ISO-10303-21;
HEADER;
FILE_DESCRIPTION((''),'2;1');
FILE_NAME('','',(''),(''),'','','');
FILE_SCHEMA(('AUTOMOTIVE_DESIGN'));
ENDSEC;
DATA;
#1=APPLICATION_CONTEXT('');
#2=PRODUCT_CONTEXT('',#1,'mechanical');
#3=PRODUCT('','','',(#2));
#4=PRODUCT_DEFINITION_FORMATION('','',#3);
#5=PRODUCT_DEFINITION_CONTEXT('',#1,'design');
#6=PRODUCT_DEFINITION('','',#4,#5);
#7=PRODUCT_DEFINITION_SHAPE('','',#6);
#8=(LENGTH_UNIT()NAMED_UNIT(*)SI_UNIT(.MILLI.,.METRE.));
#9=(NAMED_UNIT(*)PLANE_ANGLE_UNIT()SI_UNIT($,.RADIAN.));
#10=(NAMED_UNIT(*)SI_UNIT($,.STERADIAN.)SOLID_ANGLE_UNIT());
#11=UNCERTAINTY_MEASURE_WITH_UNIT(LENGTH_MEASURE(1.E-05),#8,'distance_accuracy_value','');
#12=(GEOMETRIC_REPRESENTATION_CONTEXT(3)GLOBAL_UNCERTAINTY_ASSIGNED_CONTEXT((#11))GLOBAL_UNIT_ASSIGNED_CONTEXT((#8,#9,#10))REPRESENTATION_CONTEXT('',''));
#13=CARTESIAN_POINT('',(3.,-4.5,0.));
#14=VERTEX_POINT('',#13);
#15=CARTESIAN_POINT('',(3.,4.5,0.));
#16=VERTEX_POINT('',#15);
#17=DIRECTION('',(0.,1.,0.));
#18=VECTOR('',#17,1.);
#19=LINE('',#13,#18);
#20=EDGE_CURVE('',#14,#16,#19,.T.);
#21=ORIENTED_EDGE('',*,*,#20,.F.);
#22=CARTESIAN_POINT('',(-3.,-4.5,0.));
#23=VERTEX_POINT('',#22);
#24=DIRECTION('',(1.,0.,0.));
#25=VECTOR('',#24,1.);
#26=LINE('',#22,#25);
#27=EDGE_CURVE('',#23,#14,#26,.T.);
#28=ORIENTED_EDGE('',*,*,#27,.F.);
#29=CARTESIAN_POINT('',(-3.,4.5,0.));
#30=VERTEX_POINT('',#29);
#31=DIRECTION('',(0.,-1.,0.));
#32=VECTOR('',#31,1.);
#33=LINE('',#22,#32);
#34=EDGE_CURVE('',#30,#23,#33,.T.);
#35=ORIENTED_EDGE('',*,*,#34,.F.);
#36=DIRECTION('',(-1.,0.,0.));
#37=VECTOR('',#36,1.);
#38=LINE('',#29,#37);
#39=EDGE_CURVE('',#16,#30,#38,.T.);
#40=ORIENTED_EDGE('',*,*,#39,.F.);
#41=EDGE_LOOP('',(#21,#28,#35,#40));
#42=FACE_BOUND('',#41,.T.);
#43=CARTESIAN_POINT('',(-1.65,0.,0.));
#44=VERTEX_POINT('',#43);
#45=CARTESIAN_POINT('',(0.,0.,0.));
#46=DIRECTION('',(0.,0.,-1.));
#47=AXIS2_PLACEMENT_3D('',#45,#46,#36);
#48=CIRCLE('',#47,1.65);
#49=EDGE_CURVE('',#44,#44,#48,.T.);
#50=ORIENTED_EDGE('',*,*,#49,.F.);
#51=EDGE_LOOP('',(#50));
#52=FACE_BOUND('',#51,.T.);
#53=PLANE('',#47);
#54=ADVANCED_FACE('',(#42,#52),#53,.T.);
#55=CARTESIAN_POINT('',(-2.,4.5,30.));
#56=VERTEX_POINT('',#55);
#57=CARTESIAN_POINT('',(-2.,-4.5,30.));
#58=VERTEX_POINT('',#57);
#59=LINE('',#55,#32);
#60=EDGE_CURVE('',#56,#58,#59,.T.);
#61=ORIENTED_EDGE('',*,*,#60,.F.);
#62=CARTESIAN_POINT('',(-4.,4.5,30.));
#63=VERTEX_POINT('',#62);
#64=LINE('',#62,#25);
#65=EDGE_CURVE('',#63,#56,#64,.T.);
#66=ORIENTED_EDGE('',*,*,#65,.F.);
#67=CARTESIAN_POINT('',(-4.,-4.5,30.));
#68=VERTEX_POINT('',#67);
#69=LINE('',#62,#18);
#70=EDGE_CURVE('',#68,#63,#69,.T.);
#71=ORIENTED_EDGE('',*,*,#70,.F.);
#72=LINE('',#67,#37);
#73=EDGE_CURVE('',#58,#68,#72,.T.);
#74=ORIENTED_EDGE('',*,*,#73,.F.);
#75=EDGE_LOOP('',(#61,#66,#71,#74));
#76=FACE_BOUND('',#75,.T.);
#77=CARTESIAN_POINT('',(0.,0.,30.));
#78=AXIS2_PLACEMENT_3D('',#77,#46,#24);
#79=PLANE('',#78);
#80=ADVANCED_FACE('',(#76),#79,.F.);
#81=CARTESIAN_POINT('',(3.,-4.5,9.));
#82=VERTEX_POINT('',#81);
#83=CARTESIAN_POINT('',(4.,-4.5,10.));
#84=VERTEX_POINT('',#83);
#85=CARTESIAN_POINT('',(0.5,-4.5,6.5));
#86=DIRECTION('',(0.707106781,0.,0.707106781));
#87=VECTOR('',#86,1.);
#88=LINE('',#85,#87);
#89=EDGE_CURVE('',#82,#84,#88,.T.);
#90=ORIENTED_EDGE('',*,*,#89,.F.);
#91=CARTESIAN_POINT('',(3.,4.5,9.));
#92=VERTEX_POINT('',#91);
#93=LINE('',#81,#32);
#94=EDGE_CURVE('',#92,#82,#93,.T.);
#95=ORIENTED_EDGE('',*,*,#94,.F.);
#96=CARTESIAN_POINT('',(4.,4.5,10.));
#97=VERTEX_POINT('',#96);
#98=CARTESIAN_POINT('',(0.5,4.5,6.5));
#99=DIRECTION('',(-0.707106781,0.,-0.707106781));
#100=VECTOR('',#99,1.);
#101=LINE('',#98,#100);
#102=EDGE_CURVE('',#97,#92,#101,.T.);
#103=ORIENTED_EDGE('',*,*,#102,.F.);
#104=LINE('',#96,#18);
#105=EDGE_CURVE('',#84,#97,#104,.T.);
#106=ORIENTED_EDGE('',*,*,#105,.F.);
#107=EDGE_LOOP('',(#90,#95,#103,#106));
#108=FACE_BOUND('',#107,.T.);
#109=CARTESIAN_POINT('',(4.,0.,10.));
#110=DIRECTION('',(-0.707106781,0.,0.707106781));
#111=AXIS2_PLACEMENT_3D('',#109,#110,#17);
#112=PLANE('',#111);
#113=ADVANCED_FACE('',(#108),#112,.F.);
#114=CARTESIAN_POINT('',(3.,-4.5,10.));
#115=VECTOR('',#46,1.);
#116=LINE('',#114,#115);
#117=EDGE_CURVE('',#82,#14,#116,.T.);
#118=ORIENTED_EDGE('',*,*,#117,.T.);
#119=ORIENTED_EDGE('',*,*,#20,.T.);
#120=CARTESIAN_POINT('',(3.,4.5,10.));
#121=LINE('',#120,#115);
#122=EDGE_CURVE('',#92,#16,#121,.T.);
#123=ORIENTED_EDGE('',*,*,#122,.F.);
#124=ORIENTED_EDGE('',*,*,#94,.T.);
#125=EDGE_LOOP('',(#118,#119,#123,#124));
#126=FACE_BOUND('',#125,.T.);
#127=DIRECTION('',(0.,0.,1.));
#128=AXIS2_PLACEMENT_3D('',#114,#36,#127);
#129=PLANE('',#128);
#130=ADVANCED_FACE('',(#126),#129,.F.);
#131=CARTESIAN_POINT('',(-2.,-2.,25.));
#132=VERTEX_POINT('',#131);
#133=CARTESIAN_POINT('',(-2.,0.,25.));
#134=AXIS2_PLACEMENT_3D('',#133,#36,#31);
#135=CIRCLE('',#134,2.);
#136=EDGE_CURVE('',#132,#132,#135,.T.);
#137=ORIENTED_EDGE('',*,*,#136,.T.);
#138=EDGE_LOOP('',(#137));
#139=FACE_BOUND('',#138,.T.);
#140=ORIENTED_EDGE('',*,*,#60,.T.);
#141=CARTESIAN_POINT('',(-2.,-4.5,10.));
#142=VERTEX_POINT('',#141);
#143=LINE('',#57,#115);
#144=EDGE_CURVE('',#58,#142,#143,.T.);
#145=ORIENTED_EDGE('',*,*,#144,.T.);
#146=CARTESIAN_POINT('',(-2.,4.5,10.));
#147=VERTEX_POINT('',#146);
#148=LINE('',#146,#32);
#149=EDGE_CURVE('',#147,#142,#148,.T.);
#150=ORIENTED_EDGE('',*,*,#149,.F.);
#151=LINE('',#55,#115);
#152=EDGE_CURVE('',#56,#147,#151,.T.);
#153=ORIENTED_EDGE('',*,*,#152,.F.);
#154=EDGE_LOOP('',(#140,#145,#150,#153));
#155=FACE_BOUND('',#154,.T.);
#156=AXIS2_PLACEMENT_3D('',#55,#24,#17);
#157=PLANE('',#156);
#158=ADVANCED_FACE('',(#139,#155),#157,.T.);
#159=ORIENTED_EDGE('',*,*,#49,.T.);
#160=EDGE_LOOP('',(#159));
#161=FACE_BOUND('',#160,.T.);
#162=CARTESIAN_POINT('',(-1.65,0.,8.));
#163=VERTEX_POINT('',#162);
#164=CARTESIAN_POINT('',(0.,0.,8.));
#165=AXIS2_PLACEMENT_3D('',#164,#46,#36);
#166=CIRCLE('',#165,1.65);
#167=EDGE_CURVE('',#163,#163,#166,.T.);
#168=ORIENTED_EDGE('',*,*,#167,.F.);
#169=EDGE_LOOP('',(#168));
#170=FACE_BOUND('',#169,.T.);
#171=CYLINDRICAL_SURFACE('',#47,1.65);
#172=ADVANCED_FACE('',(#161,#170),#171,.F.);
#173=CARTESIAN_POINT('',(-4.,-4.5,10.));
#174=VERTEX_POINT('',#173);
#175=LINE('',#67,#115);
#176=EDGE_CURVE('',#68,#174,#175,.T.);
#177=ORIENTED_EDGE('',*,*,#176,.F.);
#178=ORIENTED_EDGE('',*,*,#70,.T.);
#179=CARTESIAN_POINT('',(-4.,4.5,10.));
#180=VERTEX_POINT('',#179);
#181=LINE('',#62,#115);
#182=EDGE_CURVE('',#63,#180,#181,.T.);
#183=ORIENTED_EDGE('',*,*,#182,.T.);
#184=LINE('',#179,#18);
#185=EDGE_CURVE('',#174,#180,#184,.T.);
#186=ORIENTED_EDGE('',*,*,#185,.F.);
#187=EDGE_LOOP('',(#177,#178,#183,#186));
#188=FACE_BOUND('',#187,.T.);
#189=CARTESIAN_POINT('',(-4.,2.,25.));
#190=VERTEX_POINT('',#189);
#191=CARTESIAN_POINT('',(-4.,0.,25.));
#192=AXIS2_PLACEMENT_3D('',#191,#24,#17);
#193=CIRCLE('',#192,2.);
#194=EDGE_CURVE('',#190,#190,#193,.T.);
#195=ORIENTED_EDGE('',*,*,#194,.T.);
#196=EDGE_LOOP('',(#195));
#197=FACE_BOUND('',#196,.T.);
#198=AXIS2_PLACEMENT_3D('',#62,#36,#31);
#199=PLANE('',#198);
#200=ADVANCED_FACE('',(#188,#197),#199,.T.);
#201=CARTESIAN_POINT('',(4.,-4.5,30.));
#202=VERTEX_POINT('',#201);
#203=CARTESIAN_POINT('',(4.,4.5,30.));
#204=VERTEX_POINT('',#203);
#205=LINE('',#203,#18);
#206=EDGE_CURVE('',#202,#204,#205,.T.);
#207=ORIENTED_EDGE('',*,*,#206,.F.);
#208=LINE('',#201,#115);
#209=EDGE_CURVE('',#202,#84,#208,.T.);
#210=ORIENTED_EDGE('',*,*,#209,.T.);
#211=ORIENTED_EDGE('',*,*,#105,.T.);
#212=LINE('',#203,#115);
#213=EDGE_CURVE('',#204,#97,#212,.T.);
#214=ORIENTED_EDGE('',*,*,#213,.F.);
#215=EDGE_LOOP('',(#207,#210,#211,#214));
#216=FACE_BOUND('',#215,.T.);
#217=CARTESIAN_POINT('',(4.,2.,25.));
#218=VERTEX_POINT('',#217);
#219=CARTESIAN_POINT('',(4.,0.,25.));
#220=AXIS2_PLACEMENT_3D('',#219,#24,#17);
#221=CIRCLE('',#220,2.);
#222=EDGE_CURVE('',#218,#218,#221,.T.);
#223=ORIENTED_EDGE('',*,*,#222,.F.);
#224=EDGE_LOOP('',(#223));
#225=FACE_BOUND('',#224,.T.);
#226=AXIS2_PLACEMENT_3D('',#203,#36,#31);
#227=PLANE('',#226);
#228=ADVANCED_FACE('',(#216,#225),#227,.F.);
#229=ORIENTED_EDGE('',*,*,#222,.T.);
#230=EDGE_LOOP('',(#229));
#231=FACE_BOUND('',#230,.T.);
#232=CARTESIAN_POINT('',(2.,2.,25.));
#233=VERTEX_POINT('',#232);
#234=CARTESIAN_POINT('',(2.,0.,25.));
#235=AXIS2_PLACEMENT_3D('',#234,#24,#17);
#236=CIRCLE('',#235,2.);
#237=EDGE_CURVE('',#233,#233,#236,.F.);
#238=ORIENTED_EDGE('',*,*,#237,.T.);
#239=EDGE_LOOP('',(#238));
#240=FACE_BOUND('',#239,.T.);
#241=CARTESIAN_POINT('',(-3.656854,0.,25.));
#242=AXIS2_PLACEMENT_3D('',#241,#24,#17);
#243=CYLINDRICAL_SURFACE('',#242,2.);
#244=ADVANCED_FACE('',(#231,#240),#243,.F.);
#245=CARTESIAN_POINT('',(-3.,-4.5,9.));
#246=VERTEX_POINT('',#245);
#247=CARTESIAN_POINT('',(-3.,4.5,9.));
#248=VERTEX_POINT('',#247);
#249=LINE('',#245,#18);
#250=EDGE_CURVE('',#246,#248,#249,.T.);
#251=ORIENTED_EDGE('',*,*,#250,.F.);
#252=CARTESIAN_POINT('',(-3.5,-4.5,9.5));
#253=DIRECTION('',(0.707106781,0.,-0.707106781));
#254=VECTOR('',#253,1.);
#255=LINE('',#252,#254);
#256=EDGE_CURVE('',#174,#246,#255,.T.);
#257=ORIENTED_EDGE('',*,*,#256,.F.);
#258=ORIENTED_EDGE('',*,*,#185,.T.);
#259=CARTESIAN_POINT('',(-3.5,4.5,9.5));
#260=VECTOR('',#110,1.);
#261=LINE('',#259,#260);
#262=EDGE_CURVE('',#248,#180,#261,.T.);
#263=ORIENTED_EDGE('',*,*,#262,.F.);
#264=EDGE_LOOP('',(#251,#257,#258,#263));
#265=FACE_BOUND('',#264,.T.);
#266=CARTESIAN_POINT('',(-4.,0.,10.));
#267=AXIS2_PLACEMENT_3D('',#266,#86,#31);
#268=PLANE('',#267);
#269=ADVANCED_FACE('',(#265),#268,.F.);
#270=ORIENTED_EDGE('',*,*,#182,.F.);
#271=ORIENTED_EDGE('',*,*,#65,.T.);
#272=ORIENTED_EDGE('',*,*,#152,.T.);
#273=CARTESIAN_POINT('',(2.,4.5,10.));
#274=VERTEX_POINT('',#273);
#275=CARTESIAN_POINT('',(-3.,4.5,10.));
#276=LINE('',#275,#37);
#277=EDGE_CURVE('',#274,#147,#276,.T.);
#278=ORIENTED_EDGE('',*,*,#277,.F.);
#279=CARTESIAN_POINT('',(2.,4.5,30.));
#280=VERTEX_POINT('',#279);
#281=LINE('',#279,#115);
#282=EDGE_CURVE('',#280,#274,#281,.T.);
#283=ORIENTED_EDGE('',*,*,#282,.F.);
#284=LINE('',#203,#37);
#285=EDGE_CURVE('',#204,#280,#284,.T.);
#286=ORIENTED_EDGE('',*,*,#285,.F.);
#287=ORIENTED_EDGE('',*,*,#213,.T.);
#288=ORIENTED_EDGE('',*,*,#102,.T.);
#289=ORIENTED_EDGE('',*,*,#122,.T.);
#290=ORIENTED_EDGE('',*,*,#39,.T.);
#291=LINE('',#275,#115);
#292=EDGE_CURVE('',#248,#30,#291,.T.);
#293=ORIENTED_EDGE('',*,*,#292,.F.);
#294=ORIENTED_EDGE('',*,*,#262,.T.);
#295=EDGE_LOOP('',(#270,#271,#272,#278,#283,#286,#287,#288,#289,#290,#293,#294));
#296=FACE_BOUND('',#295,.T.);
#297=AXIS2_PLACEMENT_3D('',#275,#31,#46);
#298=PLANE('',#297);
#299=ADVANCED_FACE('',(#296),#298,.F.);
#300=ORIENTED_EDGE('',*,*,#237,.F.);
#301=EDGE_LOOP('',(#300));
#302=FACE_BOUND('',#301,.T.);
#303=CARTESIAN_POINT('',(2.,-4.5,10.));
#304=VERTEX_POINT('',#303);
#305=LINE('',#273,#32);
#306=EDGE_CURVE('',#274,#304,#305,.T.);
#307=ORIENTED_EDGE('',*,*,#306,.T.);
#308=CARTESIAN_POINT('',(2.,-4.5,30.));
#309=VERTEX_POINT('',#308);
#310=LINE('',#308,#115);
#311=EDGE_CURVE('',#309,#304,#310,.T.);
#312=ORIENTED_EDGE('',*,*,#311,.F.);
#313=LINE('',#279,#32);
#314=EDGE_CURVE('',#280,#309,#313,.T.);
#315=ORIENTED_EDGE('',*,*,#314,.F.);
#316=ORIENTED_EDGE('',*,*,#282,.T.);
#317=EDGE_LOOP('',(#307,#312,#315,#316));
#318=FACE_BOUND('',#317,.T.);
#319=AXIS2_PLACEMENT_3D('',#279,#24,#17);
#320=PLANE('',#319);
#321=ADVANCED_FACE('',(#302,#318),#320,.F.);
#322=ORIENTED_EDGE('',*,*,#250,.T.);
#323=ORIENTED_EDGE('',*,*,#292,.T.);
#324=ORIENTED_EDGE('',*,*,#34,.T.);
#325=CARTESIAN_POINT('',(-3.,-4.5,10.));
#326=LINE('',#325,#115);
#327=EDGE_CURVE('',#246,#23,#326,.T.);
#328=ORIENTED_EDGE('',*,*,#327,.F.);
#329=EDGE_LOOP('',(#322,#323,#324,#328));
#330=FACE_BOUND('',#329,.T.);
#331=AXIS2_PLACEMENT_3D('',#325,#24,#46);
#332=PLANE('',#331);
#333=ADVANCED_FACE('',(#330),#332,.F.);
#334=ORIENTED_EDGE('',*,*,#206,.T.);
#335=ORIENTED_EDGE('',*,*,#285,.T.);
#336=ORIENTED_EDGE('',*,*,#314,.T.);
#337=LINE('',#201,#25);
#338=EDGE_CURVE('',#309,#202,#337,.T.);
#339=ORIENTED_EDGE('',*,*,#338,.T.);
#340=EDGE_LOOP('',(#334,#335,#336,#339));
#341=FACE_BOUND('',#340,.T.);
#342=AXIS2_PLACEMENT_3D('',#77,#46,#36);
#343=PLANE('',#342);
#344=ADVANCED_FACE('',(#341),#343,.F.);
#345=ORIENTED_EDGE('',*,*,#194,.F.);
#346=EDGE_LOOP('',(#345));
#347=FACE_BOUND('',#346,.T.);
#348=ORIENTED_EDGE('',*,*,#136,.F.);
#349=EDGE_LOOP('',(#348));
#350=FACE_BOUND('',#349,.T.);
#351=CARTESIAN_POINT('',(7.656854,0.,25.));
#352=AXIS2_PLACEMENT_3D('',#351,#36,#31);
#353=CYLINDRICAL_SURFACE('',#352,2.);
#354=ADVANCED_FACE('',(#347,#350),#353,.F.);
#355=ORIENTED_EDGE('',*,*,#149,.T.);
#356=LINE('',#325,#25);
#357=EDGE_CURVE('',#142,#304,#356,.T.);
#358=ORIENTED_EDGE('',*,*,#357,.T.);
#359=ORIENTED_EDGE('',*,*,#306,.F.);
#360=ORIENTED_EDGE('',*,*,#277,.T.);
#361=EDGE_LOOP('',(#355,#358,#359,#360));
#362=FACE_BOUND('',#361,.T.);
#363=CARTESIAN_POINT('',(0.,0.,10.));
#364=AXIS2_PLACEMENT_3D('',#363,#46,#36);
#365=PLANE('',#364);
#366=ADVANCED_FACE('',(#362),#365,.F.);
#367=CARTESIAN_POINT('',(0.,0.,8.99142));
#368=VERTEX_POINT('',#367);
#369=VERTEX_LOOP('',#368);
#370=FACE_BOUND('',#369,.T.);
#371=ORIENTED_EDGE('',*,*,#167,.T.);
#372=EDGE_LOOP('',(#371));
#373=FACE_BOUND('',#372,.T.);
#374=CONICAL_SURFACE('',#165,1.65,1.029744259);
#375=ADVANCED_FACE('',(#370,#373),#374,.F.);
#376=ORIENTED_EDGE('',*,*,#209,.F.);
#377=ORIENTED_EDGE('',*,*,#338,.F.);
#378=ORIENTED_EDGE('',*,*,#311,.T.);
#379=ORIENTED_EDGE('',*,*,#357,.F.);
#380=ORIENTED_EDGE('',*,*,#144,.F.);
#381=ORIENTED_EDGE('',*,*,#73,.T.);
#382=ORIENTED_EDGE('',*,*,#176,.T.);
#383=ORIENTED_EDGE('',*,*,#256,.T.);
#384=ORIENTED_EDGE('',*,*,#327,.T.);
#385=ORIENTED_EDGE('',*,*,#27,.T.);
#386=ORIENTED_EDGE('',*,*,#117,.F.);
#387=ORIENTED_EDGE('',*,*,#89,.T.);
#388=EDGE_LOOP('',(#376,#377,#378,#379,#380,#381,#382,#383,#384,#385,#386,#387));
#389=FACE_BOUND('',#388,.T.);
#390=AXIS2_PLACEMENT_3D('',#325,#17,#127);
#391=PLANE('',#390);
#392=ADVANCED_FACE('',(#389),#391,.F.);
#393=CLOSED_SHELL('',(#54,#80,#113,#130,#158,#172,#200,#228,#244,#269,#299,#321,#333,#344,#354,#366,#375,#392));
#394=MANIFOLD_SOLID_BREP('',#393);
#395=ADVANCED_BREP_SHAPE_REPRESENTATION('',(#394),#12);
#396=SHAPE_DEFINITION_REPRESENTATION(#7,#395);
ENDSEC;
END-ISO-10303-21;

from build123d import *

# Parameters (mm, degrees)
SKETCH1_W             = 6
SKETCH1_H             = 9
BOSS_EXTRUDE1_DEPTH   = 10
M4_TAPPED_HOLE2_D     = 3.3
M4_TAPPED_HOLE2_DEPTH = 8
M4_TAPPED_HOLE2_TIP   = 0.991420021
SKETCH11_W            = 2
SKETCH11_H            = 9
BOSS_EXTRUDE5_DEPTH   = 20
SKETCH12_R            = 2
CUT_EXTRUDE1_DEPTH    = 2
CHAMFER1_SIZE         = 1
CHAMFER2_SIZE         = 1


with BuildPart() as part:
    # Sketch1 → Boss-Extrude1 (new body)
    with BuildSketch(Plane.XY):
        Rectangle(SKETCH1_W, SKETCH1_H)
    extrude(amount=BOSS_EXTRUDE1_DEPTH)

    # M4 Tapped Hole2
    with Locations(Plane(origin=(0, 0, 0), x_dir=(-1, 0, 0), z_dir=(0, 0, -1))):
        with Locations((0, 0)):
            Hole(M4_TAPPED_HOLE2_D / 2, depth=M4_TAPPED_HOLE2_DEPTH)
            with Locations((0, 0, -(M4_TAPPED_HOLE2_DEPTH + M4_TAPPED_HOLE2_TIP / 2))):  # 118° drill point
                Cone(0, M4_TAPPED_HOLE2_D / 2, M4_TAPPED_HOLE2_TIP, mode=Mode.SUBTRACT)

    # Sketch11 → Boss-Extrude5 (add)
    with BuildSketch(Plane.XY.offset(10)):
        with Locations((3, 0)):
            Rectangle(SKETCH11_W, SKETCH11_H)
    boss_extrude5 = extrude(amount=BOSS_EXTRUDE5_DEPTH)

    # Sketch12 → Cut-Extrude1 (cut)
    with BuildSketch(Plane(origin=(4, 0, 0), x_dir=(0, 0, -1), z_dir=(1, 0, 0))):
        with Locations(Location((-25, 0, 0), (0, 0, 90))):
            Circle(SKETCH12_R)
    cut_extrude1 = extrude(amount=-CUT_EXTRUDE1_DEPTH, mode=Mode.SUBTRACT)

    # Mirror1: Boss-Extrude5, Cut-Extrude1 across plane
    add(boss_extrude5.mirror(Plane(origin=(0, 0, 0), x_dir=(0, 0, 1), z_dir=(1, 0, 0))))
    add(cut_extrude1.mirror(Plane(origin=(0, 0, 0), x_dir=(0, 0, 1), z_dir=(1, 0, 0))), mode=Mode.SUBTRACT)

    # Chamfer1
    chamfer1_edges = [part.edges().sort_by_distance(p)[0] for p in [
        (3, 0, 10),
    ]]
    chamfer(chamfer1_edges, length=CHAMFER1_SIZE - 0.0001)  # a hair under: the kernel refuses the full size

    # Chamfer2
    chamfer2_edges = [part.edges().sort_by_distance(p)[0] for p in [
        (-3, 0, 10),
    ]]
    chamfer(chamfer2_edges, length=CHAMFER2_SIZE - 0.0001)  # a hair under: the kernel refuses the full size


solid = part.part
